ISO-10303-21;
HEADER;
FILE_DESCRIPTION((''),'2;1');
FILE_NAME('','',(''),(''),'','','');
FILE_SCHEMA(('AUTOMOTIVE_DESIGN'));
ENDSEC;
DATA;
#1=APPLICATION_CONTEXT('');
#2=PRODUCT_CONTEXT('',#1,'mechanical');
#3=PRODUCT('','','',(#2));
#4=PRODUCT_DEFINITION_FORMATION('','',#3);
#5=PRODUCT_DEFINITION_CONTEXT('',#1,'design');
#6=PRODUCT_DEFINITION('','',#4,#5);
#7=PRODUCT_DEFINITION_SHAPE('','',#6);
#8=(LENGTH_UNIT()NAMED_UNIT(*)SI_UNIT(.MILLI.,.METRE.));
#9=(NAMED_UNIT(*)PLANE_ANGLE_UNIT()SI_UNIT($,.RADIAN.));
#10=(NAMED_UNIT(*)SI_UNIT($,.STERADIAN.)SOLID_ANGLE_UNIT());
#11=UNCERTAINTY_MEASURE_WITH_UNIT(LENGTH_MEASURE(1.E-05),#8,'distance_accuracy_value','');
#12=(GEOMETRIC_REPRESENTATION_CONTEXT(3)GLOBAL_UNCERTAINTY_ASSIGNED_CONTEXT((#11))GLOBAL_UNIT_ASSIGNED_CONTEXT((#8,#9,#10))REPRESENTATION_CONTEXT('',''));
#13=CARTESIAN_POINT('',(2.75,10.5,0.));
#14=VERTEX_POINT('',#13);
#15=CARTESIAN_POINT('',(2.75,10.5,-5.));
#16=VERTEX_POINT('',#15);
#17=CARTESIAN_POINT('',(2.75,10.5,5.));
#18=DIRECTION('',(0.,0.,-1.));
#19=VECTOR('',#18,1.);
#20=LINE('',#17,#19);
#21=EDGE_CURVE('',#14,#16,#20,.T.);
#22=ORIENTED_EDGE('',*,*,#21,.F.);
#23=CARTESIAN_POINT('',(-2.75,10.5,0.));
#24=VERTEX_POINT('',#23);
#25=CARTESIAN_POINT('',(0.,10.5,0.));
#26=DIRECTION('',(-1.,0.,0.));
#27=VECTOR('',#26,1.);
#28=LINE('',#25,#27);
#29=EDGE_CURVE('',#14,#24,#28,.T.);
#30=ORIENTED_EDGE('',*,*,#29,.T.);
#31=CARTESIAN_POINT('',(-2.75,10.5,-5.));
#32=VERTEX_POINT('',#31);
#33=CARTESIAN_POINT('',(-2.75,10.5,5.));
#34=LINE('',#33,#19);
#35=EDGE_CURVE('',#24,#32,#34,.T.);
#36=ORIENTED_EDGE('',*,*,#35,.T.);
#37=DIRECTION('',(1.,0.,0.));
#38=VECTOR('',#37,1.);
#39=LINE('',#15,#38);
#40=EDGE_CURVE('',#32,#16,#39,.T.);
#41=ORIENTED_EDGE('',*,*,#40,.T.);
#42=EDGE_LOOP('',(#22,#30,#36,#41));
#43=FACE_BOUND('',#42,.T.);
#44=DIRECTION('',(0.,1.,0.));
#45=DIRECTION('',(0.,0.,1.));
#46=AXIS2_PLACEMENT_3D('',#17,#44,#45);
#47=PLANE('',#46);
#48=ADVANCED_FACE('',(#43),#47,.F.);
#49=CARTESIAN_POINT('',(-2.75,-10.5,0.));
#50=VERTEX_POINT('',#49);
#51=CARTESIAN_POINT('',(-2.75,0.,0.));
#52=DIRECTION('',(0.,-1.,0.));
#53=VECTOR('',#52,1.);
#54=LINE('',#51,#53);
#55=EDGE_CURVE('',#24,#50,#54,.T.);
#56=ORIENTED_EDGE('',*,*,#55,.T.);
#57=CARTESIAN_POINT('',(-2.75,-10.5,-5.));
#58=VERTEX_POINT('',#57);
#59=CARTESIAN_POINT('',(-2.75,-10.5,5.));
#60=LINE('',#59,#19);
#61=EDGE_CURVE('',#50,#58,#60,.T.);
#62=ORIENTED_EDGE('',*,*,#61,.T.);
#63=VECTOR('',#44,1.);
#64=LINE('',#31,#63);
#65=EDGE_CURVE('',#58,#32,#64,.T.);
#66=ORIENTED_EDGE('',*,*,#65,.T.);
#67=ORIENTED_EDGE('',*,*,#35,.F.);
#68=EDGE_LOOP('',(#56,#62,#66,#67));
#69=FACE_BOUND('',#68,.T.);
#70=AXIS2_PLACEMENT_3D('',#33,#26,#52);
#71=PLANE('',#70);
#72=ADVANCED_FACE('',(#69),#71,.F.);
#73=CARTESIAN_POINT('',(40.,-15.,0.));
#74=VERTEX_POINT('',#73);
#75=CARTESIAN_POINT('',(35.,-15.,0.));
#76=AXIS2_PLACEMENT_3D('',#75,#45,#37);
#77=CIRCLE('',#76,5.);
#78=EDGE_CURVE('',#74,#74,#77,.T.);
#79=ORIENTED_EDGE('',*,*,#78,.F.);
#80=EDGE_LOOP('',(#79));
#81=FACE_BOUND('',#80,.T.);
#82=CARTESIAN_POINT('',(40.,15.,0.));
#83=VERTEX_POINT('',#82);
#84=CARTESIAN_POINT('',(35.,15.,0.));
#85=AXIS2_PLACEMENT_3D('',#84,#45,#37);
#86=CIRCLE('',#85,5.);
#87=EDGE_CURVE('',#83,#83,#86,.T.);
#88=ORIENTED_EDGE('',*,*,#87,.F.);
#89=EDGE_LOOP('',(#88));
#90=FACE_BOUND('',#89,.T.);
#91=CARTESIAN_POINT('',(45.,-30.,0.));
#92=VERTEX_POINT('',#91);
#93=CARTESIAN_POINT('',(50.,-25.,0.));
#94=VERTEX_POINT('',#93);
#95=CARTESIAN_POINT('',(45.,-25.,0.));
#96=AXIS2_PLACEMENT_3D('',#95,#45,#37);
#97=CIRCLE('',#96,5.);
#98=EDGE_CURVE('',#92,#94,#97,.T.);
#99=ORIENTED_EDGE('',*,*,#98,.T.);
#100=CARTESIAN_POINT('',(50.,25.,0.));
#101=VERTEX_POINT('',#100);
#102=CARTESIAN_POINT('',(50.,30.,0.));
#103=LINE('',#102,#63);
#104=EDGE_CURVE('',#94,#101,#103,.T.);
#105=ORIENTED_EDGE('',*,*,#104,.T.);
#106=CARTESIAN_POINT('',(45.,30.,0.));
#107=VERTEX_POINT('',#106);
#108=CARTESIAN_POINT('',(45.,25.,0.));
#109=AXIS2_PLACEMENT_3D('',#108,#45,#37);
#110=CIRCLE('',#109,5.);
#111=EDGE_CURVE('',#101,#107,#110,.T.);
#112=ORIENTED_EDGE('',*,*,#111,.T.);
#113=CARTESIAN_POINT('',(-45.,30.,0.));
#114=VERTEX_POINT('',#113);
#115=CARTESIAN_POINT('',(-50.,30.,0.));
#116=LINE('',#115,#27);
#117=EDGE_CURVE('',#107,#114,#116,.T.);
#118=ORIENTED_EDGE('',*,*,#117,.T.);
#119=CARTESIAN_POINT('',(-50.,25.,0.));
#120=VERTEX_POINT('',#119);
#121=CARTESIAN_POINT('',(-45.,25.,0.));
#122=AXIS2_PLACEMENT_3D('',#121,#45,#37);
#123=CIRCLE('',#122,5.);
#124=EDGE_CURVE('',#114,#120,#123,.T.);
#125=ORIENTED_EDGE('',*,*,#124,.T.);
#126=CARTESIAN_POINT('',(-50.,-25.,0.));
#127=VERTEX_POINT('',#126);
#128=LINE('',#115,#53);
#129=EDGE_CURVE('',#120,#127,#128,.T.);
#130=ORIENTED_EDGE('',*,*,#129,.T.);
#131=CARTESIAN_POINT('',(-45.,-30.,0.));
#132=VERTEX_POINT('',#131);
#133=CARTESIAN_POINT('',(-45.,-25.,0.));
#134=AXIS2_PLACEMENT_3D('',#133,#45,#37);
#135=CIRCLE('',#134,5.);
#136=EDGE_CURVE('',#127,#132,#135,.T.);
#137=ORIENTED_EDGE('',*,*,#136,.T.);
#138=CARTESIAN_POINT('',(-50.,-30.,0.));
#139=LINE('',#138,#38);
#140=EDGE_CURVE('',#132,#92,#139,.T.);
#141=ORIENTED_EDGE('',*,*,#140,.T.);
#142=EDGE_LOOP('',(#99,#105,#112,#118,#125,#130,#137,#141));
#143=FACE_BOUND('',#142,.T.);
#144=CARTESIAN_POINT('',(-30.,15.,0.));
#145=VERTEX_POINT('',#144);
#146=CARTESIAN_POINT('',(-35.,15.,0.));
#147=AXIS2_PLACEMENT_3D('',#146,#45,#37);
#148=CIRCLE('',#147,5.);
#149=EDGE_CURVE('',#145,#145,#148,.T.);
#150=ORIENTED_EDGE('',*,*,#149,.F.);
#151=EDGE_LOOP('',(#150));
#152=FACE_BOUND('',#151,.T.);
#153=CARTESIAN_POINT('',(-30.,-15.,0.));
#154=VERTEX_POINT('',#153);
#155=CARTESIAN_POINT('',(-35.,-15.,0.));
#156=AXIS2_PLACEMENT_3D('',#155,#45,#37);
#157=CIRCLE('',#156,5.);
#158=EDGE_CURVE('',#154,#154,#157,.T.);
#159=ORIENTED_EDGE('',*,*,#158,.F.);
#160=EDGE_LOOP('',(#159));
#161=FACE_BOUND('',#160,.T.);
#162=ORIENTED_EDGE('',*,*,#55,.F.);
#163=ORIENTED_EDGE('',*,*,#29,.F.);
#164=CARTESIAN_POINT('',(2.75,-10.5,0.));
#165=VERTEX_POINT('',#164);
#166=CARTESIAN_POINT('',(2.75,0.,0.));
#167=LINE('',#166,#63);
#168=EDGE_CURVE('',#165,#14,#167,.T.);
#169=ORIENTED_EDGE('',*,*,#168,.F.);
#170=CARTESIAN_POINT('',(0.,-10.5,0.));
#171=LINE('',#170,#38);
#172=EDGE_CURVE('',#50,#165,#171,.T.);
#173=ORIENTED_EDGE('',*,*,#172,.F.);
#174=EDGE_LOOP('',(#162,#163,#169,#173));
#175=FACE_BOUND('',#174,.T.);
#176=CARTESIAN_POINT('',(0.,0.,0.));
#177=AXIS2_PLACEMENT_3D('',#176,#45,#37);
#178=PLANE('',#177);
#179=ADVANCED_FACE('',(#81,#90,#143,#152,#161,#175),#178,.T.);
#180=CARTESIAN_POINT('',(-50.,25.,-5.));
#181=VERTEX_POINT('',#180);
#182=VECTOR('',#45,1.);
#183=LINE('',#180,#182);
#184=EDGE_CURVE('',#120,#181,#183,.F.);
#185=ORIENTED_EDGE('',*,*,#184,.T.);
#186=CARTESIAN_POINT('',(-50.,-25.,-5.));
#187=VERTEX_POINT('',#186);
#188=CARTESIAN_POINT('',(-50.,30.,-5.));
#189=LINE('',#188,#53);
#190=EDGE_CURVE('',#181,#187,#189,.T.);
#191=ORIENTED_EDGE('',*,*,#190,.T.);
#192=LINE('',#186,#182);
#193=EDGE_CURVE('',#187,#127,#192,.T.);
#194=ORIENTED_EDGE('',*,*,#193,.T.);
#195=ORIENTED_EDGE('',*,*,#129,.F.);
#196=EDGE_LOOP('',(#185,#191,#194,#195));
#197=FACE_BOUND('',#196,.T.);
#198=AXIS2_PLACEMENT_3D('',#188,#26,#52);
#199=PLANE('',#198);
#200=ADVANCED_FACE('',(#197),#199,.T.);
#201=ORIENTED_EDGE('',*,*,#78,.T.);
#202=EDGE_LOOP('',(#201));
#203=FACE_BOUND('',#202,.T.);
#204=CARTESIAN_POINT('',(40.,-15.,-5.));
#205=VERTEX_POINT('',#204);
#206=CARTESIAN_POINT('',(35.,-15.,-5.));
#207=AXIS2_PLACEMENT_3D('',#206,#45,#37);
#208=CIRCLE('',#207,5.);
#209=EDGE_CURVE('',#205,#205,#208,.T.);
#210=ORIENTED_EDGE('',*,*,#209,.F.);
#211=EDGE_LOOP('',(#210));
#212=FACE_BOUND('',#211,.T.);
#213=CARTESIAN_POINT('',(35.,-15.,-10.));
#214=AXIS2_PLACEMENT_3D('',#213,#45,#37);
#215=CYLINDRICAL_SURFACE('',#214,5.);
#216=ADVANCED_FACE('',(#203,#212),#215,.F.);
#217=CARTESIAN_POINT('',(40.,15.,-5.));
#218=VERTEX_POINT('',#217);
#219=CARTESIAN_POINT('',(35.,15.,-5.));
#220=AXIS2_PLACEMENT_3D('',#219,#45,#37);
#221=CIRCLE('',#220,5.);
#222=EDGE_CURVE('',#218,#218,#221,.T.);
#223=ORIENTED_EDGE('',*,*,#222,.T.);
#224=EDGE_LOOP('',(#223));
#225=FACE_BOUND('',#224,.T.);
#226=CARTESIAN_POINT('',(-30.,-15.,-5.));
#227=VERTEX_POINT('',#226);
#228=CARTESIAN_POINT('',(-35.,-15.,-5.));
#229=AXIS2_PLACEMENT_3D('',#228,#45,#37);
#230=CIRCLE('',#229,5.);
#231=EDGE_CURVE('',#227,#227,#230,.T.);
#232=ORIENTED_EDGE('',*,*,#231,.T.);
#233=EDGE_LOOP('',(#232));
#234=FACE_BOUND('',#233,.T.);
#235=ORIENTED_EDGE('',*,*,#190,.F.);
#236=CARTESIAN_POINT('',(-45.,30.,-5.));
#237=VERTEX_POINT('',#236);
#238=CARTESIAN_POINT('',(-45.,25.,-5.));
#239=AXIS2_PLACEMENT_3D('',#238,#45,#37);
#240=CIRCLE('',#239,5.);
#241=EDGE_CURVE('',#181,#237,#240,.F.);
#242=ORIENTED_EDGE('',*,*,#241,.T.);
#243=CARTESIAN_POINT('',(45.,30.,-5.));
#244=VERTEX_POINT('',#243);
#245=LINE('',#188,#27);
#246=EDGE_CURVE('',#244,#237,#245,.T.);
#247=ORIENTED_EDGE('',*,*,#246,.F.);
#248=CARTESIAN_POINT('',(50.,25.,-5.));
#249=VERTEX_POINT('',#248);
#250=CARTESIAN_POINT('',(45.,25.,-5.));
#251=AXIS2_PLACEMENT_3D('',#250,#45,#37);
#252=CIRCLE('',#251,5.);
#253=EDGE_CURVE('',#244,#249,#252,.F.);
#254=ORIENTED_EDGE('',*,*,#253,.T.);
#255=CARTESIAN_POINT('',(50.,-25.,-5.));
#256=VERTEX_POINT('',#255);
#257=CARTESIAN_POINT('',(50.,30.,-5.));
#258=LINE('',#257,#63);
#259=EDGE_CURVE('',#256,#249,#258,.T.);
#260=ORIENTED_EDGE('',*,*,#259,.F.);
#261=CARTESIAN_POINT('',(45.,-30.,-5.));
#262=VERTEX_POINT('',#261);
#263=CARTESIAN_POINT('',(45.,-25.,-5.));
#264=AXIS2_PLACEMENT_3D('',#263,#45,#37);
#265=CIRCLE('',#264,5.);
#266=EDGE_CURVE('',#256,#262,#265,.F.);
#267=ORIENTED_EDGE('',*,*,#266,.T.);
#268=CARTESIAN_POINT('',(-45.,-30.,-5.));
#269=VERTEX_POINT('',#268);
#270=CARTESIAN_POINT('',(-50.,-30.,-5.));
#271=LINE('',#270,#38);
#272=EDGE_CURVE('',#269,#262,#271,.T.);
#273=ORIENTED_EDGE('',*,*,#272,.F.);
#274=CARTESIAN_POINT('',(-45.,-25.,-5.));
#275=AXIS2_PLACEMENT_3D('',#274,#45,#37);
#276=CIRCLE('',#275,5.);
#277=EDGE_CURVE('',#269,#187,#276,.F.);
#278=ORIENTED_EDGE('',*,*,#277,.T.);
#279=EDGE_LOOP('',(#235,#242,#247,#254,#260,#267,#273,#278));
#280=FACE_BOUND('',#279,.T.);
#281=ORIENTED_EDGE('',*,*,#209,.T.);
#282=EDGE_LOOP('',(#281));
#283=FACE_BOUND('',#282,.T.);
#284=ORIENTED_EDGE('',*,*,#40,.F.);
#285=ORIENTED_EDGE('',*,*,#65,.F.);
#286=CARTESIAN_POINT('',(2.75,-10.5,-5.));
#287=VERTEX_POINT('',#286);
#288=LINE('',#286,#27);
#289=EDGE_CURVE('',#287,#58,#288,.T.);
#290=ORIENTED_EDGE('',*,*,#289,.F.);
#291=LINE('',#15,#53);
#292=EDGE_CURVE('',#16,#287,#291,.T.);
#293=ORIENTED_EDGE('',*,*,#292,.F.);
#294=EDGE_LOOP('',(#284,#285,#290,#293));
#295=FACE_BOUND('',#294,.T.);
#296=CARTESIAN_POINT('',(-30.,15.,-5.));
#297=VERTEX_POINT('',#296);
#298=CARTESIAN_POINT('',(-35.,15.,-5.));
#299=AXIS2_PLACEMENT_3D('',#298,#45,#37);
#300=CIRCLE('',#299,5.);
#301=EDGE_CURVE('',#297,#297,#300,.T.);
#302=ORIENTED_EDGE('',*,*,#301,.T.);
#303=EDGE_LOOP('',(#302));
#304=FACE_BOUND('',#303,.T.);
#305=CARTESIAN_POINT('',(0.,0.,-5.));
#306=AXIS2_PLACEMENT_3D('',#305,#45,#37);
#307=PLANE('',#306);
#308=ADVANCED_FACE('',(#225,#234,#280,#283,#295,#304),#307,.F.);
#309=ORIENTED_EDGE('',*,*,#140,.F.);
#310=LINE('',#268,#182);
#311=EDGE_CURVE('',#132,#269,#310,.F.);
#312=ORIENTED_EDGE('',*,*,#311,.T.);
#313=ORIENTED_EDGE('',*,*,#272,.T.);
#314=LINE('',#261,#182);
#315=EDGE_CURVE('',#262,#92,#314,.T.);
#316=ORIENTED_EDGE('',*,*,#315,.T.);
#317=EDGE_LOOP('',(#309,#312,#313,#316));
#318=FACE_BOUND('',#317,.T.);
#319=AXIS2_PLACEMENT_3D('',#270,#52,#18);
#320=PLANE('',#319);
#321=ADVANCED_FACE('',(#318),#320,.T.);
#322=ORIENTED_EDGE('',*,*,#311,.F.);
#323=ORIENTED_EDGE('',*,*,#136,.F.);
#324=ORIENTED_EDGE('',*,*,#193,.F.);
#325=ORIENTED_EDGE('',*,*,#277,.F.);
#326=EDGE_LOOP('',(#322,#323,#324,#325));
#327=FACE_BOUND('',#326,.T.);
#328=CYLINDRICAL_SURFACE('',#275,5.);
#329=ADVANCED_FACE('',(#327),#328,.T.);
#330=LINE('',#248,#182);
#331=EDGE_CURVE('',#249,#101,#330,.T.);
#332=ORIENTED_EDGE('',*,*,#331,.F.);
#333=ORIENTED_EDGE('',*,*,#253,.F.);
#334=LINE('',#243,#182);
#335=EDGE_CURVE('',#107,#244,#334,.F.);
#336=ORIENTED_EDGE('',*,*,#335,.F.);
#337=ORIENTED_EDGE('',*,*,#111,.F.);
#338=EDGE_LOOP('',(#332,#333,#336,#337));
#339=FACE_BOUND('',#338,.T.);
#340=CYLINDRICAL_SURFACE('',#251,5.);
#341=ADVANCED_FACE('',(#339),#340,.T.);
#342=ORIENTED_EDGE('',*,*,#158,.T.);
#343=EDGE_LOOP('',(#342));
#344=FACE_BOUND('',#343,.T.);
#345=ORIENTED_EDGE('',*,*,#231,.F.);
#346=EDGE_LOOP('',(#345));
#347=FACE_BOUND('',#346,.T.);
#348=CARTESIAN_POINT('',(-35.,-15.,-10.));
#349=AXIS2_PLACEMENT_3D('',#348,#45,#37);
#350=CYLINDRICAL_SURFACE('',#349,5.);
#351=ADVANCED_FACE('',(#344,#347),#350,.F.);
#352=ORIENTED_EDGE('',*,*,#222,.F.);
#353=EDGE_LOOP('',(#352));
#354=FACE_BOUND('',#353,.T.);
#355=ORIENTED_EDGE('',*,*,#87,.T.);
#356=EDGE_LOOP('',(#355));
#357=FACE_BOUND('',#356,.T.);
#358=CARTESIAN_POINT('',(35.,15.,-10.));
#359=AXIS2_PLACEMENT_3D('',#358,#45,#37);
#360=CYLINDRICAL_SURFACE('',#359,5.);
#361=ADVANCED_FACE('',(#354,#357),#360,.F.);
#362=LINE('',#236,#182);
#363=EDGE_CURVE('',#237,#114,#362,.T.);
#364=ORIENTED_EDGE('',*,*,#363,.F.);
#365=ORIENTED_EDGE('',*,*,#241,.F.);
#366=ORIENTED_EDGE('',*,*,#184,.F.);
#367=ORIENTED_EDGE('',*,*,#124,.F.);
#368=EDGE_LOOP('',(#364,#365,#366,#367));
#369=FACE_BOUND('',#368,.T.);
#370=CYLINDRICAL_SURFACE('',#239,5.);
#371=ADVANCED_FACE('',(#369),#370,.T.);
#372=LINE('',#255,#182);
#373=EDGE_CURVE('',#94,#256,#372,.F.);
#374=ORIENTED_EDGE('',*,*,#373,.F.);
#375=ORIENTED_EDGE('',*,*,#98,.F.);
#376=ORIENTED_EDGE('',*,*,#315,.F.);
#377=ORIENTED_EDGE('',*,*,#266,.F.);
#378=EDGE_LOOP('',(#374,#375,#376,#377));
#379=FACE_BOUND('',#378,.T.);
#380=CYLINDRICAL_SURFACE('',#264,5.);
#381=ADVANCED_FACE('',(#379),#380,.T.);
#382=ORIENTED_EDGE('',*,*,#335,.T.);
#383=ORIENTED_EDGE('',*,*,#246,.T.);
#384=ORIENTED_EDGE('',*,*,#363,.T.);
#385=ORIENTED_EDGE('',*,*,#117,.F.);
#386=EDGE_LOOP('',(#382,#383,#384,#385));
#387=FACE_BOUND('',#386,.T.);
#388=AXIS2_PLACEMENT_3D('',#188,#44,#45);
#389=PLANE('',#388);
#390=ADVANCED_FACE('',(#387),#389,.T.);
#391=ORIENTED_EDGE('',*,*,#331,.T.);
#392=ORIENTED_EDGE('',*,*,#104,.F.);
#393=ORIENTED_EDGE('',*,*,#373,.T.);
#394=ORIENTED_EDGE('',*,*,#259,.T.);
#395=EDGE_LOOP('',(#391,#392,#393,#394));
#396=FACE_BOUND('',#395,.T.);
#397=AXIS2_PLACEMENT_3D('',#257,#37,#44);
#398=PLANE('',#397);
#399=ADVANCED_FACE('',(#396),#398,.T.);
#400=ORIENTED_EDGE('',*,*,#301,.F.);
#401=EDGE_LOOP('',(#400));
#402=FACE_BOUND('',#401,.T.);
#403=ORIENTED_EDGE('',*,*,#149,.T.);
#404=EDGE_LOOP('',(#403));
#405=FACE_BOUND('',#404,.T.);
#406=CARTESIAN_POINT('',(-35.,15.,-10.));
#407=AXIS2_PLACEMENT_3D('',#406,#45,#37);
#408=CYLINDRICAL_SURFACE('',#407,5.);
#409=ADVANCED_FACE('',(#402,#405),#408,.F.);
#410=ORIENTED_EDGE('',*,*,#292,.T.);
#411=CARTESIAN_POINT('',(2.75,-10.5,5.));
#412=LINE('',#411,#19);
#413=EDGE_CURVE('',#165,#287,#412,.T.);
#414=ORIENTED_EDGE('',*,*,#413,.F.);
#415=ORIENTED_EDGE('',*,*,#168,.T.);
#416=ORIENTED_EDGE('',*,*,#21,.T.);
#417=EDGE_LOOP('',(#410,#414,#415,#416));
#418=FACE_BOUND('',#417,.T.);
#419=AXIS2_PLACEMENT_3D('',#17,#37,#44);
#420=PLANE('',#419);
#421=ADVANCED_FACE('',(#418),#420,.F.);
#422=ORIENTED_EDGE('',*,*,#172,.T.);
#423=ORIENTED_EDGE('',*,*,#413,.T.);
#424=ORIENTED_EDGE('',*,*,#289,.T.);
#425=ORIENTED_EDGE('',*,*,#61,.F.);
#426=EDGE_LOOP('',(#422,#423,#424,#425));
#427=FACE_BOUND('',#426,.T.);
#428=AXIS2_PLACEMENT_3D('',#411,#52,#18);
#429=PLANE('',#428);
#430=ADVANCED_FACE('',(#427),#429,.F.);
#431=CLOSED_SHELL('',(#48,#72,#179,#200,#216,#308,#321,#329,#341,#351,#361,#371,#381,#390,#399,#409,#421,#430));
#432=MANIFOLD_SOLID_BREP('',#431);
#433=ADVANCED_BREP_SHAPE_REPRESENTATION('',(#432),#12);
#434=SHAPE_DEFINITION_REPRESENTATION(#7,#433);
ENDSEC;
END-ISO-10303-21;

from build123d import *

# Parameters (mm, degrees)
IZIM1_W               = 100
IZIM1_H               = 60
TABAN_FLAN_1_DEPTH    = 5
RADYUS1_R             = 5
IZIM6_R               = 5
KES_EKSTR_ZYON1_DEPTH = 10
IZIM7_W               = 5.5
IZIM7_H               = 21
KES_EKSTR_ZYON2_DEPTH = 10


# Sheet-metal steps are written as plain solids
with BuildPart() as part:
    # Çizim1 → Taban-Flanş1 (new body)
    with BuildSketch(Plane.XY):
        Rectangle(IZIM1_W, IZIM1_H)
    extrude(amount=-TABAN_FLAN_1_DEPTH)

    # Radyus1
    radyus1_edges = [part.edges().sort_by_distance(p)[0] for p in [
        (50, -30, -2.5),
        (-50, -30, -2.5),
        (-50, 30, -2.5),
        (50, 30, -2.5),
    ]]
    fillet(radyus1_edges, radius=RADYUS1_R)

    # Çizim6 → Kes-Ekstrüzyon1 (cut)
    with BuildSketch(Plane.XY):
        with Locations((-35, 15)):
            Circle(IZIM6_R)
        with Locations((-35, -15)):
            Circle(IZIM6_R)
        with Locations((35, 15)):
            Circle(IZIM6_R)
        with Locations((35, -15)):
            Circle(IZIM6_R)
    extrude(amount=-KES_EKSTR_ZYON1_DEPTH, mode=Mode.SUBTRACT)

    # Çizim7 → Kes-Ekstrüzyon2 (cut)
    with BuildSketch(Plane(origin=(0, 0, -5), x_dir=(-1, 0, 0), z_dir=(0, 0, -1))):
        Rectangle(IZIM7_W, IZIM7_H)
    extrude(amount=-KES_EKSTR_ZYON2_DEPTH, mode=Mode.SUBTRACT)


solid = part.part
